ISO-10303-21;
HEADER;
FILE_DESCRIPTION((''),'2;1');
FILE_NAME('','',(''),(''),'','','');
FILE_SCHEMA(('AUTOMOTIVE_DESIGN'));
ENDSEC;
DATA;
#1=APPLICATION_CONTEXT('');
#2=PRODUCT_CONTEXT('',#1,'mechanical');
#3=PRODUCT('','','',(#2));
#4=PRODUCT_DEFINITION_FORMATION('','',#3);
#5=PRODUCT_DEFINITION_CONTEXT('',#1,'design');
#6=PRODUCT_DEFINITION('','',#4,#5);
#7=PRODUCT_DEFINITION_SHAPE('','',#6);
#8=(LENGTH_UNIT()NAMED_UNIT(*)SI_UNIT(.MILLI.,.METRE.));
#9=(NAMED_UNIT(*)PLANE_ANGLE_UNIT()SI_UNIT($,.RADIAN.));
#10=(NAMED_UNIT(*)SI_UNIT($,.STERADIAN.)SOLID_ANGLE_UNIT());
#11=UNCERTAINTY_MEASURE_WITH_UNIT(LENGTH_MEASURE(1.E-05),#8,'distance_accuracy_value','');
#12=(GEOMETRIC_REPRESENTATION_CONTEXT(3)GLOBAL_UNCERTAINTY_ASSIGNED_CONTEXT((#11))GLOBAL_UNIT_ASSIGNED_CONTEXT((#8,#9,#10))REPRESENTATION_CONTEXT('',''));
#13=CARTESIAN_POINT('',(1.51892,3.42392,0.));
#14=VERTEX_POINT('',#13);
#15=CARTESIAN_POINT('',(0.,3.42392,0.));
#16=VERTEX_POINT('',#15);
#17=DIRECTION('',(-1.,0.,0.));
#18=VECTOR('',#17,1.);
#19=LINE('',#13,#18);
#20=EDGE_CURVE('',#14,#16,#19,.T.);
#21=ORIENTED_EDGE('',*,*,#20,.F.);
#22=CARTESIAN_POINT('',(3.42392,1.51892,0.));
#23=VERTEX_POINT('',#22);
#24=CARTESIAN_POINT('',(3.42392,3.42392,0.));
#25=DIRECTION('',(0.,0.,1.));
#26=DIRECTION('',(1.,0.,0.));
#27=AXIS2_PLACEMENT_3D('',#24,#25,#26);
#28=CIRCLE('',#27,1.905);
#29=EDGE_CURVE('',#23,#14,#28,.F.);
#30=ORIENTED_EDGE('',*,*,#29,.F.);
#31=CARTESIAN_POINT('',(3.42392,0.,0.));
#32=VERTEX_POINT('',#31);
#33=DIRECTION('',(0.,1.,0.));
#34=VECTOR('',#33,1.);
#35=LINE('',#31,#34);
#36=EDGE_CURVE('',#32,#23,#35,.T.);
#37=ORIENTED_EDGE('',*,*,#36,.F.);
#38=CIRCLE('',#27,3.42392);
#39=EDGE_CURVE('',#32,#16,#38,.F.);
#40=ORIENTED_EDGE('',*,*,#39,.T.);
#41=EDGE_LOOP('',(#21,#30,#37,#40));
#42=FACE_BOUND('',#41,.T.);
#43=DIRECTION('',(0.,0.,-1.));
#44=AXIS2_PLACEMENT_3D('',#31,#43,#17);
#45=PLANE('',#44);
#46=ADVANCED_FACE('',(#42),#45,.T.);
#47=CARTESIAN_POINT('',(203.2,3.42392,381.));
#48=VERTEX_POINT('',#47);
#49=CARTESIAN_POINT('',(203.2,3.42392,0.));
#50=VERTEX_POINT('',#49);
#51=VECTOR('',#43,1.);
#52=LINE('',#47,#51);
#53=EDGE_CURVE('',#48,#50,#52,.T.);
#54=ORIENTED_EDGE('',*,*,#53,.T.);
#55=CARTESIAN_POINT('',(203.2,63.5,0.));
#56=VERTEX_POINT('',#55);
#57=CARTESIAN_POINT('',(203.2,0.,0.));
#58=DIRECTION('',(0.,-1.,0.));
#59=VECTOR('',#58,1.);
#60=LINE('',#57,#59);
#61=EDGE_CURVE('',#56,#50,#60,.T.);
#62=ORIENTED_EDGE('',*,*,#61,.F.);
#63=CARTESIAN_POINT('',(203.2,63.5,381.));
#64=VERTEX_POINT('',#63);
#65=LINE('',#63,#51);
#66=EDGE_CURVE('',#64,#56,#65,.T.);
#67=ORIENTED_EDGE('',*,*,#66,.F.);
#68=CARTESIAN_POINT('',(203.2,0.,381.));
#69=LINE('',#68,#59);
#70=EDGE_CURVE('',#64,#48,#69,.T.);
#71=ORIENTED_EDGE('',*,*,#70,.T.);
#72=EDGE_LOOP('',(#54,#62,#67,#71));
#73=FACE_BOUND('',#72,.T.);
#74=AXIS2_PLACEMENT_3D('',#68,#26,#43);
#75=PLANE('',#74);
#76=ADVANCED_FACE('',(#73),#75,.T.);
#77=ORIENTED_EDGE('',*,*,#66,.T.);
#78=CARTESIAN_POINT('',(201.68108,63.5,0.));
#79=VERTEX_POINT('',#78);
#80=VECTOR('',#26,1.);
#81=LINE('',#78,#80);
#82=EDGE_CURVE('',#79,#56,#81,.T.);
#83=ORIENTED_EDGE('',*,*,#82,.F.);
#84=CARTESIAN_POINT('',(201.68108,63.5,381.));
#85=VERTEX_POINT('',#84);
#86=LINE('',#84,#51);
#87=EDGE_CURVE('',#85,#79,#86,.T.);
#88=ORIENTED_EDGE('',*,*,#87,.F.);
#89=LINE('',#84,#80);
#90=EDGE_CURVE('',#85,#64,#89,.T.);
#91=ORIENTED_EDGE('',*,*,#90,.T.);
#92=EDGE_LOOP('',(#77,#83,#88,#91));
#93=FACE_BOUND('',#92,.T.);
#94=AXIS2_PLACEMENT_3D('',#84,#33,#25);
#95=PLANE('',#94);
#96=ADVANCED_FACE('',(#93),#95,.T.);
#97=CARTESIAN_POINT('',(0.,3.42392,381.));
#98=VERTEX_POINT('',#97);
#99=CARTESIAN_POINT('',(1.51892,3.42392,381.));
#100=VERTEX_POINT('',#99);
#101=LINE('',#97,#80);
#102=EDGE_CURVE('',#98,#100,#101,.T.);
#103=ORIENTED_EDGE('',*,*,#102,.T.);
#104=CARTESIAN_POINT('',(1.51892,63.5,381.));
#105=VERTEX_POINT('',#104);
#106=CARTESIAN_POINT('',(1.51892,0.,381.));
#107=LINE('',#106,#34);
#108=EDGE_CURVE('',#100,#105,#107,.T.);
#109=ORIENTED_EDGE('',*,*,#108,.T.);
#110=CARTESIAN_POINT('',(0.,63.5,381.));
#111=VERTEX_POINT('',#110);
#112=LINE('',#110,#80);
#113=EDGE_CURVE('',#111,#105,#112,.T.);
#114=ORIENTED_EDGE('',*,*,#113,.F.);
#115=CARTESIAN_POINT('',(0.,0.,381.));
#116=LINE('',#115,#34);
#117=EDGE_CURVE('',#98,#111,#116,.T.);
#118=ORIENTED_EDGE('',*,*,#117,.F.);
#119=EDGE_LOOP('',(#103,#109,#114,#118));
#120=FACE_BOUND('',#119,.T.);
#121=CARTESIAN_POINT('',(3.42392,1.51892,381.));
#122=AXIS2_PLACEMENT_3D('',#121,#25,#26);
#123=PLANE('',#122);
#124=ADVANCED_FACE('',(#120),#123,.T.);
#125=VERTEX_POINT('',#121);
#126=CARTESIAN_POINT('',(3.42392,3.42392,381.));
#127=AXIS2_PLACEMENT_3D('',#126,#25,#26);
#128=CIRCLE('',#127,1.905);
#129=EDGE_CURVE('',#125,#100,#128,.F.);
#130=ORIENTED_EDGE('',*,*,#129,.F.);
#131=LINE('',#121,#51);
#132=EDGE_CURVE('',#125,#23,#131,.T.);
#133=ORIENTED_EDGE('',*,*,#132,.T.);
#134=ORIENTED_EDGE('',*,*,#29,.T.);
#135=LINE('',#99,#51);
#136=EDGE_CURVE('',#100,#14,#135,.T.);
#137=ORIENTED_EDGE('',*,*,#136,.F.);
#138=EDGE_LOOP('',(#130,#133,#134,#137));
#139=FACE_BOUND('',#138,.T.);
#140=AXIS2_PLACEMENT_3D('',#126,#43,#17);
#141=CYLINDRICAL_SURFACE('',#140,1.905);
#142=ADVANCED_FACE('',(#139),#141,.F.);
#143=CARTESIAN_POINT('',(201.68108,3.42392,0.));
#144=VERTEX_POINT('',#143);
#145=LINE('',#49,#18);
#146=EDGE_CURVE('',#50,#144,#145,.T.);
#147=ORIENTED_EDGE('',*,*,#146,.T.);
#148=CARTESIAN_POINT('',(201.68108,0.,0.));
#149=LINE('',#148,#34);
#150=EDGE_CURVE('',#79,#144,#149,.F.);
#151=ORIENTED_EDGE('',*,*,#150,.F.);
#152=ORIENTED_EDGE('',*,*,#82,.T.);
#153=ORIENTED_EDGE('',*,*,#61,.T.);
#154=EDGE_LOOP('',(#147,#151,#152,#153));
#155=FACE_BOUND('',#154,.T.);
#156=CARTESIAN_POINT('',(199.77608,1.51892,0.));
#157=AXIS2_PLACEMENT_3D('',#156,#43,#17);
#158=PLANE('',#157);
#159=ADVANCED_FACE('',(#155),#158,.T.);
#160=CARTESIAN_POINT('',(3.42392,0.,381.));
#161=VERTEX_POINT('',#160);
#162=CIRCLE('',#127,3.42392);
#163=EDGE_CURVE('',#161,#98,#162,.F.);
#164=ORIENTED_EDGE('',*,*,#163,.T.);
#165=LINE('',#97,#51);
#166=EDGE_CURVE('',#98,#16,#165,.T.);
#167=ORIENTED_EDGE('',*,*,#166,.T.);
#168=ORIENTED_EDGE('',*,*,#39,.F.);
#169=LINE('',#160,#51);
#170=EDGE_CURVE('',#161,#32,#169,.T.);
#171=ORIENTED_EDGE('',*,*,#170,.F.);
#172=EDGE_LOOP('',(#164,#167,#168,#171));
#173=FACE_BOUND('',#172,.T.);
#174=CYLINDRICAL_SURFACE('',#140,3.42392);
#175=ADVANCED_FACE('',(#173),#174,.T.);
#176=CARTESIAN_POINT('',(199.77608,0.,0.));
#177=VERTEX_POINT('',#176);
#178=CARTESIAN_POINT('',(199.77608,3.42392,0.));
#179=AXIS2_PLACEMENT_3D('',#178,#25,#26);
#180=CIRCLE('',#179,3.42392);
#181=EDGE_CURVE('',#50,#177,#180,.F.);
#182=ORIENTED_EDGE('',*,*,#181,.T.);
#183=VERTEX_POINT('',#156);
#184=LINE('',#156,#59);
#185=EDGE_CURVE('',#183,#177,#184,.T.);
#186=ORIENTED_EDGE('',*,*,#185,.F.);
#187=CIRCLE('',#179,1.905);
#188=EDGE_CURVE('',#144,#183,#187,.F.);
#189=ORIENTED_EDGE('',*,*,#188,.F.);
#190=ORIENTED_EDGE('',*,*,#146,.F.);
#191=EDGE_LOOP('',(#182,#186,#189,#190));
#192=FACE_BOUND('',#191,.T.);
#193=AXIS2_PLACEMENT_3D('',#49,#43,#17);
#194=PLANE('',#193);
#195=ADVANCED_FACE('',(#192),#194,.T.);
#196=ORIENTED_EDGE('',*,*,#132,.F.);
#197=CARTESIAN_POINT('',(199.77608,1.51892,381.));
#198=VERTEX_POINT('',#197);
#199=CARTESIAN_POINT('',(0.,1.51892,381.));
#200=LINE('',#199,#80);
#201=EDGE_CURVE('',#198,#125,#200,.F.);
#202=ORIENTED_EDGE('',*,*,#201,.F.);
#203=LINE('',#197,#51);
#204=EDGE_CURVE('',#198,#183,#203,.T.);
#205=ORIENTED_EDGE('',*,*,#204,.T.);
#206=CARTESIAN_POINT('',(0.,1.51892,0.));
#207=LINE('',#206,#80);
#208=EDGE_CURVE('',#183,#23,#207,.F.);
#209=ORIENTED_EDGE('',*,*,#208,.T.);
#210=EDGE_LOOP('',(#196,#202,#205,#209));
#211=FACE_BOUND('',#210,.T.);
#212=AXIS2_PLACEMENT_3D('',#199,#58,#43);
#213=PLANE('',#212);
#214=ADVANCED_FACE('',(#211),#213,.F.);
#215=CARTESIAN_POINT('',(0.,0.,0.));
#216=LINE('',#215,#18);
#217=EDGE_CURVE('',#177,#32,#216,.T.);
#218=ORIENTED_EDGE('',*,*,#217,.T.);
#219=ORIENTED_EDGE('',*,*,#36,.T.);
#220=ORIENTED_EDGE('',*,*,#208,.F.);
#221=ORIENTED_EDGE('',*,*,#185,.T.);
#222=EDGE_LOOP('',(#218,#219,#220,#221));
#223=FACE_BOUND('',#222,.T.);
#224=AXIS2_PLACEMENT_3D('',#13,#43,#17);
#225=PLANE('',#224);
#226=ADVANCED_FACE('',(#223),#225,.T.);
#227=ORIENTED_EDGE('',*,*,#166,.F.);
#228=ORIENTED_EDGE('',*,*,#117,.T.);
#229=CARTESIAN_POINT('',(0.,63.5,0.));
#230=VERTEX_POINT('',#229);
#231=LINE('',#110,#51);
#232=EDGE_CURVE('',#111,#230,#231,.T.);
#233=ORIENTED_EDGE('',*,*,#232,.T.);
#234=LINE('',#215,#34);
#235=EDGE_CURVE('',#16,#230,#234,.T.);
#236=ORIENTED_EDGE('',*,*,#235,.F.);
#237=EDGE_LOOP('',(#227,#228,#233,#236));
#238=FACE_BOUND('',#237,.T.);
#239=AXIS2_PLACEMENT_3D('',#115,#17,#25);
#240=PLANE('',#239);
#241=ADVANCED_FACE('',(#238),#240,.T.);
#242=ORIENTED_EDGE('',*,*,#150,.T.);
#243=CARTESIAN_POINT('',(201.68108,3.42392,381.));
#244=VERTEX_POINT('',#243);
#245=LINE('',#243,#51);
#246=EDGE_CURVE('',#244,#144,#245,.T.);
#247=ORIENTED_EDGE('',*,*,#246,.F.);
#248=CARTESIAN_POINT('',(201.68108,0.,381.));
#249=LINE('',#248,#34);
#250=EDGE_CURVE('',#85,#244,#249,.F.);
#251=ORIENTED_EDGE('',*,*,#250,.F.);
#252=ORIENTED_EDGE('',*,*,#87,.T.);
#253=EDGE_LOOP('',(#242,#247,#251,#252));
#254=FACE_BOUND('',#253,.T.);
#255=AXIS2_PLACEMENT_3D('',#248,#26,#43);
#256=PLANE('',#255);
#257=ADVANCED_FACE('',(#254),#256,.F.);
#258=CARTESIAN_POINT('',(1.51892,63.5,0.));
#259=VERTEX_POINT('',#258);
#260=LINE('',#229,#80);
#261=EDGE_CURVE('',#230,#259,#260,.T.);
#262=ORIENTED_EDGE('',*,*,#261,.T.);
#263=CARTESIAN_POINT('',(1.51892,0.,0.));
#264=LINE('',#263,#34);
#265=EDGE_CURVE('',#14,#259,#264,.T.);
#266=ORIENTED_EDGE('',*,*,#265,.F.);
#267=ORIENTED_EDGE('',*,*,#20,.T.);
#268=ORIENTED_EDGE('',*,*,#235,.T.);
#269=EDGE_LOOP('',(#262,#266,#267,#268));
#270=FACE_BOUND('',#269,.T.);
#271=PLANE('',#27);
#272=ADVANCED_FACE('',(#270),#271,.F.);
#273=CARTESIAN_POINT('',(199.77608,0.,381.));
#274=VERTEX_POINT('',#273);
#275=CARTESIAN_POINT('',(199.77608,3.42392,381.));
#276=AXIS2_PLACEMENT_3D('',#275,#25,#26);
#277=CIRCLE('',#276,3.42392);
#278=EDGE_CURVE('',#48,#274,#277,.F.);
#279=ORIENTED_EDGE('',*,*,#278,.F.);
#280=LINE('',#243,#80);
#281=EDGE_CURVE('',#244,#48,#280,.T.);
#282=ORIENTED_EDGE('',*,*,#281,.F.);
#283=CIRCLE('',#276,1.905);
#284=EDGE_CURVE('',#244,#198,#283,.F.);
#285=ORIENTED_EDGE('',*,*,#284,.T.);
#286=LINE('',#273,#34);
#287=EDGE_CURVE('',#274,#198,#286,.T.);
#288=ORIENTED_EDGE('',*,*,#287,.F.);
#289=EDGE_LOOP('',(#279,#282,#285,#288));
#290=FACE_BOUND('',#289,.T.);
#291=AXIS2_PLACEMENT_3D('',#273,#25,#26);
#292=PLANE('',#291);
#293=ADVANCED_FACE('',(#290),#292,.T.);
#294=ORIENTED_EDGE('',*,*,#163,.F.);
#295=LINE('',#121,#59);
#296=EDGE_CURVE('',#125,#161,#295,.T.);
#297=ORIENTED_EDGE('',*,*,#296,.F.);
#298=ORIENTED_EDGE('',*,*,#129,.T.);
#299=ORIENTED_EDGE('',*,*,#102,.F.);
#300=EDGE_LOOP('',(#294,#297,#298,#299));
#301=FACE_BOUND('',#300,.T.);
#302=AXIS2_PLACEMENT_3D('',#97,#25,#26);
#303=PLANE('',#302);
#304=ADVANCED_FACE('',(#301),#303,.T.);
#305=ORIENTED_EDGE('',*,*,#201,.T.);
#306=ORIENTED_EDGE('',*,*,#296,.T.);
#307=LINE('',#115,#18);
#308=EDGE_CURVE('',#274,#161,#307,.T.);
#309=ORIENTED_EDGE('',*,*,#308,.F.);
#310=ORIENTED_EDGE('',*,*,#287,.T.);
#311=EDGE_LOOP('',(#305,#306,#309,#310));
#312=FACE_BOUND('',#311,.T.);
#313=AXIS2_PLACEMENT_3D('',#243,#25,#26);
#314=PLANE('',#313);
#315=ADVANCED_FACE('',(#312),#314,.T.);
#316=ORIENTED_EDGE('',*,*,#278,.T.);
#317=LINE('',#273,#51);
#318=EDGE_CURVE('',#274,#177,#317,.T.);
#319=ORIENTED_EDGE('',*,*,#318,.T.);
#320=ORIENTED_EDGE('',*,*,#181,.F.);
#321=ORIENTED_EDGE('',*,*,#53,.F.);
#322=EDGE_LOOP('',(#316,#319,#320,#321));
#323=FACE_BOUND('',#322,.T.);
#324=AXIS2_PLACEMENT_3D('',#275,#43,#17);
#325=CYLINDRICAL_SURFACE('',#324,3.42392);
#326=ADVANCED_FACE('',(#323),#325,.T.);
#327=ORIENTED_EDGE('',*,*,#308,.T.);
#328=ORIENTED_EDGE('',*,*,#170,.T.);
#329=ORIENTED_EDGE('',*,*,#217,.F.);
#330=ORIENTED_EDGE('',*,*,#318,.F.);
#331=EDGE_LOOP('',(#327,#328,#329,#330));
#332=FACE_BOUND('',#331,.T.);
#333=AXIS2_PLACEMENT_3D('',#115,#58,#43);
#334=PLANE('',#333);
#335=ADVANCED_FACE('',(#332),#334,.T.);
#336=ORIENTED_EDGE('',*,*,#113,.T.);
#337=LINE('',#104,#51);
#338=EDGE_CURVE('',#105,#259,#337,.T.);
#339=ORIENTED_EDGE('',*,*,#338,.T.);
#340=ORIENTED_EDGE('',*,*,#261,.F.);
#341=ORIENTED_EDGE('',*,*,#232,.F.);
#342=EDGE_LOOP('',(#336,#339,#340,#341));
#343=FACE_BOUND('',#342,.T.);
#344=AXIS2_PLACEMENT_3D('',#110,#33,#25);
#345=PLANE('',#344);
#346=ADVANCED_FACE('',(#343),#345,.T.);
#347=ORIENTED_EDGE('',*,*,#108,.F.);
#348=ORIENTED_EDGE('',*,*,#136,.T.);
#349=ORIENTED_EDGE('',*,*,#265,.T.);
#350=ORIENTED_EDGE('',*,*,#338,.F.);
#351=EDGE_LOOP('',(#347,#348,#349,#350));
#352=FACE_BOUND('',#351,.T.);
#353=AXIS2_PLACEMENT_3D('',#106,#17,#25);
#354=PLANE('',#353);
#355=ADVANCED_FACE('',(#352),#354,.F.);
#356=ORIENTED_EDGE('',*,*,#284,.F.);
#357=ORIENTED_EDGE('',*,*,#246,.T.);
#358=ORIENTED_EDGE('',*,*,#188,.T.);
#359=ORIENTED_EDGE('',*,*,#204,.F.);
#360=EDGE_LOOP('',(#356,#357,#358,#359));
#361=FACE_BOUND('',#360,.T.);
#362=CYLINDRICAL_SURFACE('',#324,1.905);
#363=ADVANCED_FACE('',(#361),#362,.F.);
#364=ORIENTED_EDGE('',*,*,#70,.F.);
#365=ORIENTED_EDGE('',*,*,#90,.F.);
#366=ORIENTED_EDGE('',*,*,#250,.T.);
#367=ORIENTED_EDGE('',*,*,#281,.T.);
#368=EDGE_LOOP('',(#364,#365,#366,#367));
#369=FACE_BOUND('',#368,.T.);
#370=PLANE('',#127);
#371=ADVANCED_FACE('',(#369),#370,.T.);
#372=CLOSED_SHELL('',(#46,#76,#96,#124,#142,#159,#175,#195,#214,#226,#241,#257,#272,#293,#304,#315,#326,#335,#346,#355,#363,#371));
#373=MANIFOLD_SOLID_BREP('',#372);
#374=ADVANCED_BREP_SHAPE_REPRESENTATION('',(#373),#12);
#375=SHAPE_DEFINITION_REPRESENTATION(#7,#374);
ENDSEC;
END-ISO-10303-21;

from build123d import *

# Parameters (mm, degrees)
BASE_FLANGE1_DEPTH = 381


# Sheet-metal steps are written as plain solids
with BuildPart() as part:
    # Sketch2 → Base-Flange1 (new body)
    with BuildSketch(Plane.XY):
        with BuildLine():
            Line((0, 63.5), (0, 3.42392))
            ThreePointArc((0, 3.42392), (1.00284295, 1.00284295), (3.42392, 0))
            Line((3.42392, 0), (199.77608, 0))
            ThreePointArc((199.77608, 0), (202.19715705, 1.00284295), (203.2, 3.42392))
            Line((203.2, 3.42392), (203.2, 63.5))
            Line((203.2, 63.5), (201.68108, 63.5))
            Line((201.68108, 63.5), (201.68108, 3.42392))
            ThreePointArc((201.68108, 3.42392), (201.123118418, 2.076881582), (199.77608, 1.51892))
            Line((199.77608, 1.51892), (3.42392, 1.51892))
            ThreePointArc((3.42392, 1.51892), (2.076881582, 2.076881582), (1.51892, 3.42392))
            Line((1.51892, 3.42392), (1.51892, 63.5))
            Line((1.51892, 63.5), (0, 63.5))
        make_face()
    extrude(amount=BASE_FLANGE1_DEPTH)


solid = part.part
